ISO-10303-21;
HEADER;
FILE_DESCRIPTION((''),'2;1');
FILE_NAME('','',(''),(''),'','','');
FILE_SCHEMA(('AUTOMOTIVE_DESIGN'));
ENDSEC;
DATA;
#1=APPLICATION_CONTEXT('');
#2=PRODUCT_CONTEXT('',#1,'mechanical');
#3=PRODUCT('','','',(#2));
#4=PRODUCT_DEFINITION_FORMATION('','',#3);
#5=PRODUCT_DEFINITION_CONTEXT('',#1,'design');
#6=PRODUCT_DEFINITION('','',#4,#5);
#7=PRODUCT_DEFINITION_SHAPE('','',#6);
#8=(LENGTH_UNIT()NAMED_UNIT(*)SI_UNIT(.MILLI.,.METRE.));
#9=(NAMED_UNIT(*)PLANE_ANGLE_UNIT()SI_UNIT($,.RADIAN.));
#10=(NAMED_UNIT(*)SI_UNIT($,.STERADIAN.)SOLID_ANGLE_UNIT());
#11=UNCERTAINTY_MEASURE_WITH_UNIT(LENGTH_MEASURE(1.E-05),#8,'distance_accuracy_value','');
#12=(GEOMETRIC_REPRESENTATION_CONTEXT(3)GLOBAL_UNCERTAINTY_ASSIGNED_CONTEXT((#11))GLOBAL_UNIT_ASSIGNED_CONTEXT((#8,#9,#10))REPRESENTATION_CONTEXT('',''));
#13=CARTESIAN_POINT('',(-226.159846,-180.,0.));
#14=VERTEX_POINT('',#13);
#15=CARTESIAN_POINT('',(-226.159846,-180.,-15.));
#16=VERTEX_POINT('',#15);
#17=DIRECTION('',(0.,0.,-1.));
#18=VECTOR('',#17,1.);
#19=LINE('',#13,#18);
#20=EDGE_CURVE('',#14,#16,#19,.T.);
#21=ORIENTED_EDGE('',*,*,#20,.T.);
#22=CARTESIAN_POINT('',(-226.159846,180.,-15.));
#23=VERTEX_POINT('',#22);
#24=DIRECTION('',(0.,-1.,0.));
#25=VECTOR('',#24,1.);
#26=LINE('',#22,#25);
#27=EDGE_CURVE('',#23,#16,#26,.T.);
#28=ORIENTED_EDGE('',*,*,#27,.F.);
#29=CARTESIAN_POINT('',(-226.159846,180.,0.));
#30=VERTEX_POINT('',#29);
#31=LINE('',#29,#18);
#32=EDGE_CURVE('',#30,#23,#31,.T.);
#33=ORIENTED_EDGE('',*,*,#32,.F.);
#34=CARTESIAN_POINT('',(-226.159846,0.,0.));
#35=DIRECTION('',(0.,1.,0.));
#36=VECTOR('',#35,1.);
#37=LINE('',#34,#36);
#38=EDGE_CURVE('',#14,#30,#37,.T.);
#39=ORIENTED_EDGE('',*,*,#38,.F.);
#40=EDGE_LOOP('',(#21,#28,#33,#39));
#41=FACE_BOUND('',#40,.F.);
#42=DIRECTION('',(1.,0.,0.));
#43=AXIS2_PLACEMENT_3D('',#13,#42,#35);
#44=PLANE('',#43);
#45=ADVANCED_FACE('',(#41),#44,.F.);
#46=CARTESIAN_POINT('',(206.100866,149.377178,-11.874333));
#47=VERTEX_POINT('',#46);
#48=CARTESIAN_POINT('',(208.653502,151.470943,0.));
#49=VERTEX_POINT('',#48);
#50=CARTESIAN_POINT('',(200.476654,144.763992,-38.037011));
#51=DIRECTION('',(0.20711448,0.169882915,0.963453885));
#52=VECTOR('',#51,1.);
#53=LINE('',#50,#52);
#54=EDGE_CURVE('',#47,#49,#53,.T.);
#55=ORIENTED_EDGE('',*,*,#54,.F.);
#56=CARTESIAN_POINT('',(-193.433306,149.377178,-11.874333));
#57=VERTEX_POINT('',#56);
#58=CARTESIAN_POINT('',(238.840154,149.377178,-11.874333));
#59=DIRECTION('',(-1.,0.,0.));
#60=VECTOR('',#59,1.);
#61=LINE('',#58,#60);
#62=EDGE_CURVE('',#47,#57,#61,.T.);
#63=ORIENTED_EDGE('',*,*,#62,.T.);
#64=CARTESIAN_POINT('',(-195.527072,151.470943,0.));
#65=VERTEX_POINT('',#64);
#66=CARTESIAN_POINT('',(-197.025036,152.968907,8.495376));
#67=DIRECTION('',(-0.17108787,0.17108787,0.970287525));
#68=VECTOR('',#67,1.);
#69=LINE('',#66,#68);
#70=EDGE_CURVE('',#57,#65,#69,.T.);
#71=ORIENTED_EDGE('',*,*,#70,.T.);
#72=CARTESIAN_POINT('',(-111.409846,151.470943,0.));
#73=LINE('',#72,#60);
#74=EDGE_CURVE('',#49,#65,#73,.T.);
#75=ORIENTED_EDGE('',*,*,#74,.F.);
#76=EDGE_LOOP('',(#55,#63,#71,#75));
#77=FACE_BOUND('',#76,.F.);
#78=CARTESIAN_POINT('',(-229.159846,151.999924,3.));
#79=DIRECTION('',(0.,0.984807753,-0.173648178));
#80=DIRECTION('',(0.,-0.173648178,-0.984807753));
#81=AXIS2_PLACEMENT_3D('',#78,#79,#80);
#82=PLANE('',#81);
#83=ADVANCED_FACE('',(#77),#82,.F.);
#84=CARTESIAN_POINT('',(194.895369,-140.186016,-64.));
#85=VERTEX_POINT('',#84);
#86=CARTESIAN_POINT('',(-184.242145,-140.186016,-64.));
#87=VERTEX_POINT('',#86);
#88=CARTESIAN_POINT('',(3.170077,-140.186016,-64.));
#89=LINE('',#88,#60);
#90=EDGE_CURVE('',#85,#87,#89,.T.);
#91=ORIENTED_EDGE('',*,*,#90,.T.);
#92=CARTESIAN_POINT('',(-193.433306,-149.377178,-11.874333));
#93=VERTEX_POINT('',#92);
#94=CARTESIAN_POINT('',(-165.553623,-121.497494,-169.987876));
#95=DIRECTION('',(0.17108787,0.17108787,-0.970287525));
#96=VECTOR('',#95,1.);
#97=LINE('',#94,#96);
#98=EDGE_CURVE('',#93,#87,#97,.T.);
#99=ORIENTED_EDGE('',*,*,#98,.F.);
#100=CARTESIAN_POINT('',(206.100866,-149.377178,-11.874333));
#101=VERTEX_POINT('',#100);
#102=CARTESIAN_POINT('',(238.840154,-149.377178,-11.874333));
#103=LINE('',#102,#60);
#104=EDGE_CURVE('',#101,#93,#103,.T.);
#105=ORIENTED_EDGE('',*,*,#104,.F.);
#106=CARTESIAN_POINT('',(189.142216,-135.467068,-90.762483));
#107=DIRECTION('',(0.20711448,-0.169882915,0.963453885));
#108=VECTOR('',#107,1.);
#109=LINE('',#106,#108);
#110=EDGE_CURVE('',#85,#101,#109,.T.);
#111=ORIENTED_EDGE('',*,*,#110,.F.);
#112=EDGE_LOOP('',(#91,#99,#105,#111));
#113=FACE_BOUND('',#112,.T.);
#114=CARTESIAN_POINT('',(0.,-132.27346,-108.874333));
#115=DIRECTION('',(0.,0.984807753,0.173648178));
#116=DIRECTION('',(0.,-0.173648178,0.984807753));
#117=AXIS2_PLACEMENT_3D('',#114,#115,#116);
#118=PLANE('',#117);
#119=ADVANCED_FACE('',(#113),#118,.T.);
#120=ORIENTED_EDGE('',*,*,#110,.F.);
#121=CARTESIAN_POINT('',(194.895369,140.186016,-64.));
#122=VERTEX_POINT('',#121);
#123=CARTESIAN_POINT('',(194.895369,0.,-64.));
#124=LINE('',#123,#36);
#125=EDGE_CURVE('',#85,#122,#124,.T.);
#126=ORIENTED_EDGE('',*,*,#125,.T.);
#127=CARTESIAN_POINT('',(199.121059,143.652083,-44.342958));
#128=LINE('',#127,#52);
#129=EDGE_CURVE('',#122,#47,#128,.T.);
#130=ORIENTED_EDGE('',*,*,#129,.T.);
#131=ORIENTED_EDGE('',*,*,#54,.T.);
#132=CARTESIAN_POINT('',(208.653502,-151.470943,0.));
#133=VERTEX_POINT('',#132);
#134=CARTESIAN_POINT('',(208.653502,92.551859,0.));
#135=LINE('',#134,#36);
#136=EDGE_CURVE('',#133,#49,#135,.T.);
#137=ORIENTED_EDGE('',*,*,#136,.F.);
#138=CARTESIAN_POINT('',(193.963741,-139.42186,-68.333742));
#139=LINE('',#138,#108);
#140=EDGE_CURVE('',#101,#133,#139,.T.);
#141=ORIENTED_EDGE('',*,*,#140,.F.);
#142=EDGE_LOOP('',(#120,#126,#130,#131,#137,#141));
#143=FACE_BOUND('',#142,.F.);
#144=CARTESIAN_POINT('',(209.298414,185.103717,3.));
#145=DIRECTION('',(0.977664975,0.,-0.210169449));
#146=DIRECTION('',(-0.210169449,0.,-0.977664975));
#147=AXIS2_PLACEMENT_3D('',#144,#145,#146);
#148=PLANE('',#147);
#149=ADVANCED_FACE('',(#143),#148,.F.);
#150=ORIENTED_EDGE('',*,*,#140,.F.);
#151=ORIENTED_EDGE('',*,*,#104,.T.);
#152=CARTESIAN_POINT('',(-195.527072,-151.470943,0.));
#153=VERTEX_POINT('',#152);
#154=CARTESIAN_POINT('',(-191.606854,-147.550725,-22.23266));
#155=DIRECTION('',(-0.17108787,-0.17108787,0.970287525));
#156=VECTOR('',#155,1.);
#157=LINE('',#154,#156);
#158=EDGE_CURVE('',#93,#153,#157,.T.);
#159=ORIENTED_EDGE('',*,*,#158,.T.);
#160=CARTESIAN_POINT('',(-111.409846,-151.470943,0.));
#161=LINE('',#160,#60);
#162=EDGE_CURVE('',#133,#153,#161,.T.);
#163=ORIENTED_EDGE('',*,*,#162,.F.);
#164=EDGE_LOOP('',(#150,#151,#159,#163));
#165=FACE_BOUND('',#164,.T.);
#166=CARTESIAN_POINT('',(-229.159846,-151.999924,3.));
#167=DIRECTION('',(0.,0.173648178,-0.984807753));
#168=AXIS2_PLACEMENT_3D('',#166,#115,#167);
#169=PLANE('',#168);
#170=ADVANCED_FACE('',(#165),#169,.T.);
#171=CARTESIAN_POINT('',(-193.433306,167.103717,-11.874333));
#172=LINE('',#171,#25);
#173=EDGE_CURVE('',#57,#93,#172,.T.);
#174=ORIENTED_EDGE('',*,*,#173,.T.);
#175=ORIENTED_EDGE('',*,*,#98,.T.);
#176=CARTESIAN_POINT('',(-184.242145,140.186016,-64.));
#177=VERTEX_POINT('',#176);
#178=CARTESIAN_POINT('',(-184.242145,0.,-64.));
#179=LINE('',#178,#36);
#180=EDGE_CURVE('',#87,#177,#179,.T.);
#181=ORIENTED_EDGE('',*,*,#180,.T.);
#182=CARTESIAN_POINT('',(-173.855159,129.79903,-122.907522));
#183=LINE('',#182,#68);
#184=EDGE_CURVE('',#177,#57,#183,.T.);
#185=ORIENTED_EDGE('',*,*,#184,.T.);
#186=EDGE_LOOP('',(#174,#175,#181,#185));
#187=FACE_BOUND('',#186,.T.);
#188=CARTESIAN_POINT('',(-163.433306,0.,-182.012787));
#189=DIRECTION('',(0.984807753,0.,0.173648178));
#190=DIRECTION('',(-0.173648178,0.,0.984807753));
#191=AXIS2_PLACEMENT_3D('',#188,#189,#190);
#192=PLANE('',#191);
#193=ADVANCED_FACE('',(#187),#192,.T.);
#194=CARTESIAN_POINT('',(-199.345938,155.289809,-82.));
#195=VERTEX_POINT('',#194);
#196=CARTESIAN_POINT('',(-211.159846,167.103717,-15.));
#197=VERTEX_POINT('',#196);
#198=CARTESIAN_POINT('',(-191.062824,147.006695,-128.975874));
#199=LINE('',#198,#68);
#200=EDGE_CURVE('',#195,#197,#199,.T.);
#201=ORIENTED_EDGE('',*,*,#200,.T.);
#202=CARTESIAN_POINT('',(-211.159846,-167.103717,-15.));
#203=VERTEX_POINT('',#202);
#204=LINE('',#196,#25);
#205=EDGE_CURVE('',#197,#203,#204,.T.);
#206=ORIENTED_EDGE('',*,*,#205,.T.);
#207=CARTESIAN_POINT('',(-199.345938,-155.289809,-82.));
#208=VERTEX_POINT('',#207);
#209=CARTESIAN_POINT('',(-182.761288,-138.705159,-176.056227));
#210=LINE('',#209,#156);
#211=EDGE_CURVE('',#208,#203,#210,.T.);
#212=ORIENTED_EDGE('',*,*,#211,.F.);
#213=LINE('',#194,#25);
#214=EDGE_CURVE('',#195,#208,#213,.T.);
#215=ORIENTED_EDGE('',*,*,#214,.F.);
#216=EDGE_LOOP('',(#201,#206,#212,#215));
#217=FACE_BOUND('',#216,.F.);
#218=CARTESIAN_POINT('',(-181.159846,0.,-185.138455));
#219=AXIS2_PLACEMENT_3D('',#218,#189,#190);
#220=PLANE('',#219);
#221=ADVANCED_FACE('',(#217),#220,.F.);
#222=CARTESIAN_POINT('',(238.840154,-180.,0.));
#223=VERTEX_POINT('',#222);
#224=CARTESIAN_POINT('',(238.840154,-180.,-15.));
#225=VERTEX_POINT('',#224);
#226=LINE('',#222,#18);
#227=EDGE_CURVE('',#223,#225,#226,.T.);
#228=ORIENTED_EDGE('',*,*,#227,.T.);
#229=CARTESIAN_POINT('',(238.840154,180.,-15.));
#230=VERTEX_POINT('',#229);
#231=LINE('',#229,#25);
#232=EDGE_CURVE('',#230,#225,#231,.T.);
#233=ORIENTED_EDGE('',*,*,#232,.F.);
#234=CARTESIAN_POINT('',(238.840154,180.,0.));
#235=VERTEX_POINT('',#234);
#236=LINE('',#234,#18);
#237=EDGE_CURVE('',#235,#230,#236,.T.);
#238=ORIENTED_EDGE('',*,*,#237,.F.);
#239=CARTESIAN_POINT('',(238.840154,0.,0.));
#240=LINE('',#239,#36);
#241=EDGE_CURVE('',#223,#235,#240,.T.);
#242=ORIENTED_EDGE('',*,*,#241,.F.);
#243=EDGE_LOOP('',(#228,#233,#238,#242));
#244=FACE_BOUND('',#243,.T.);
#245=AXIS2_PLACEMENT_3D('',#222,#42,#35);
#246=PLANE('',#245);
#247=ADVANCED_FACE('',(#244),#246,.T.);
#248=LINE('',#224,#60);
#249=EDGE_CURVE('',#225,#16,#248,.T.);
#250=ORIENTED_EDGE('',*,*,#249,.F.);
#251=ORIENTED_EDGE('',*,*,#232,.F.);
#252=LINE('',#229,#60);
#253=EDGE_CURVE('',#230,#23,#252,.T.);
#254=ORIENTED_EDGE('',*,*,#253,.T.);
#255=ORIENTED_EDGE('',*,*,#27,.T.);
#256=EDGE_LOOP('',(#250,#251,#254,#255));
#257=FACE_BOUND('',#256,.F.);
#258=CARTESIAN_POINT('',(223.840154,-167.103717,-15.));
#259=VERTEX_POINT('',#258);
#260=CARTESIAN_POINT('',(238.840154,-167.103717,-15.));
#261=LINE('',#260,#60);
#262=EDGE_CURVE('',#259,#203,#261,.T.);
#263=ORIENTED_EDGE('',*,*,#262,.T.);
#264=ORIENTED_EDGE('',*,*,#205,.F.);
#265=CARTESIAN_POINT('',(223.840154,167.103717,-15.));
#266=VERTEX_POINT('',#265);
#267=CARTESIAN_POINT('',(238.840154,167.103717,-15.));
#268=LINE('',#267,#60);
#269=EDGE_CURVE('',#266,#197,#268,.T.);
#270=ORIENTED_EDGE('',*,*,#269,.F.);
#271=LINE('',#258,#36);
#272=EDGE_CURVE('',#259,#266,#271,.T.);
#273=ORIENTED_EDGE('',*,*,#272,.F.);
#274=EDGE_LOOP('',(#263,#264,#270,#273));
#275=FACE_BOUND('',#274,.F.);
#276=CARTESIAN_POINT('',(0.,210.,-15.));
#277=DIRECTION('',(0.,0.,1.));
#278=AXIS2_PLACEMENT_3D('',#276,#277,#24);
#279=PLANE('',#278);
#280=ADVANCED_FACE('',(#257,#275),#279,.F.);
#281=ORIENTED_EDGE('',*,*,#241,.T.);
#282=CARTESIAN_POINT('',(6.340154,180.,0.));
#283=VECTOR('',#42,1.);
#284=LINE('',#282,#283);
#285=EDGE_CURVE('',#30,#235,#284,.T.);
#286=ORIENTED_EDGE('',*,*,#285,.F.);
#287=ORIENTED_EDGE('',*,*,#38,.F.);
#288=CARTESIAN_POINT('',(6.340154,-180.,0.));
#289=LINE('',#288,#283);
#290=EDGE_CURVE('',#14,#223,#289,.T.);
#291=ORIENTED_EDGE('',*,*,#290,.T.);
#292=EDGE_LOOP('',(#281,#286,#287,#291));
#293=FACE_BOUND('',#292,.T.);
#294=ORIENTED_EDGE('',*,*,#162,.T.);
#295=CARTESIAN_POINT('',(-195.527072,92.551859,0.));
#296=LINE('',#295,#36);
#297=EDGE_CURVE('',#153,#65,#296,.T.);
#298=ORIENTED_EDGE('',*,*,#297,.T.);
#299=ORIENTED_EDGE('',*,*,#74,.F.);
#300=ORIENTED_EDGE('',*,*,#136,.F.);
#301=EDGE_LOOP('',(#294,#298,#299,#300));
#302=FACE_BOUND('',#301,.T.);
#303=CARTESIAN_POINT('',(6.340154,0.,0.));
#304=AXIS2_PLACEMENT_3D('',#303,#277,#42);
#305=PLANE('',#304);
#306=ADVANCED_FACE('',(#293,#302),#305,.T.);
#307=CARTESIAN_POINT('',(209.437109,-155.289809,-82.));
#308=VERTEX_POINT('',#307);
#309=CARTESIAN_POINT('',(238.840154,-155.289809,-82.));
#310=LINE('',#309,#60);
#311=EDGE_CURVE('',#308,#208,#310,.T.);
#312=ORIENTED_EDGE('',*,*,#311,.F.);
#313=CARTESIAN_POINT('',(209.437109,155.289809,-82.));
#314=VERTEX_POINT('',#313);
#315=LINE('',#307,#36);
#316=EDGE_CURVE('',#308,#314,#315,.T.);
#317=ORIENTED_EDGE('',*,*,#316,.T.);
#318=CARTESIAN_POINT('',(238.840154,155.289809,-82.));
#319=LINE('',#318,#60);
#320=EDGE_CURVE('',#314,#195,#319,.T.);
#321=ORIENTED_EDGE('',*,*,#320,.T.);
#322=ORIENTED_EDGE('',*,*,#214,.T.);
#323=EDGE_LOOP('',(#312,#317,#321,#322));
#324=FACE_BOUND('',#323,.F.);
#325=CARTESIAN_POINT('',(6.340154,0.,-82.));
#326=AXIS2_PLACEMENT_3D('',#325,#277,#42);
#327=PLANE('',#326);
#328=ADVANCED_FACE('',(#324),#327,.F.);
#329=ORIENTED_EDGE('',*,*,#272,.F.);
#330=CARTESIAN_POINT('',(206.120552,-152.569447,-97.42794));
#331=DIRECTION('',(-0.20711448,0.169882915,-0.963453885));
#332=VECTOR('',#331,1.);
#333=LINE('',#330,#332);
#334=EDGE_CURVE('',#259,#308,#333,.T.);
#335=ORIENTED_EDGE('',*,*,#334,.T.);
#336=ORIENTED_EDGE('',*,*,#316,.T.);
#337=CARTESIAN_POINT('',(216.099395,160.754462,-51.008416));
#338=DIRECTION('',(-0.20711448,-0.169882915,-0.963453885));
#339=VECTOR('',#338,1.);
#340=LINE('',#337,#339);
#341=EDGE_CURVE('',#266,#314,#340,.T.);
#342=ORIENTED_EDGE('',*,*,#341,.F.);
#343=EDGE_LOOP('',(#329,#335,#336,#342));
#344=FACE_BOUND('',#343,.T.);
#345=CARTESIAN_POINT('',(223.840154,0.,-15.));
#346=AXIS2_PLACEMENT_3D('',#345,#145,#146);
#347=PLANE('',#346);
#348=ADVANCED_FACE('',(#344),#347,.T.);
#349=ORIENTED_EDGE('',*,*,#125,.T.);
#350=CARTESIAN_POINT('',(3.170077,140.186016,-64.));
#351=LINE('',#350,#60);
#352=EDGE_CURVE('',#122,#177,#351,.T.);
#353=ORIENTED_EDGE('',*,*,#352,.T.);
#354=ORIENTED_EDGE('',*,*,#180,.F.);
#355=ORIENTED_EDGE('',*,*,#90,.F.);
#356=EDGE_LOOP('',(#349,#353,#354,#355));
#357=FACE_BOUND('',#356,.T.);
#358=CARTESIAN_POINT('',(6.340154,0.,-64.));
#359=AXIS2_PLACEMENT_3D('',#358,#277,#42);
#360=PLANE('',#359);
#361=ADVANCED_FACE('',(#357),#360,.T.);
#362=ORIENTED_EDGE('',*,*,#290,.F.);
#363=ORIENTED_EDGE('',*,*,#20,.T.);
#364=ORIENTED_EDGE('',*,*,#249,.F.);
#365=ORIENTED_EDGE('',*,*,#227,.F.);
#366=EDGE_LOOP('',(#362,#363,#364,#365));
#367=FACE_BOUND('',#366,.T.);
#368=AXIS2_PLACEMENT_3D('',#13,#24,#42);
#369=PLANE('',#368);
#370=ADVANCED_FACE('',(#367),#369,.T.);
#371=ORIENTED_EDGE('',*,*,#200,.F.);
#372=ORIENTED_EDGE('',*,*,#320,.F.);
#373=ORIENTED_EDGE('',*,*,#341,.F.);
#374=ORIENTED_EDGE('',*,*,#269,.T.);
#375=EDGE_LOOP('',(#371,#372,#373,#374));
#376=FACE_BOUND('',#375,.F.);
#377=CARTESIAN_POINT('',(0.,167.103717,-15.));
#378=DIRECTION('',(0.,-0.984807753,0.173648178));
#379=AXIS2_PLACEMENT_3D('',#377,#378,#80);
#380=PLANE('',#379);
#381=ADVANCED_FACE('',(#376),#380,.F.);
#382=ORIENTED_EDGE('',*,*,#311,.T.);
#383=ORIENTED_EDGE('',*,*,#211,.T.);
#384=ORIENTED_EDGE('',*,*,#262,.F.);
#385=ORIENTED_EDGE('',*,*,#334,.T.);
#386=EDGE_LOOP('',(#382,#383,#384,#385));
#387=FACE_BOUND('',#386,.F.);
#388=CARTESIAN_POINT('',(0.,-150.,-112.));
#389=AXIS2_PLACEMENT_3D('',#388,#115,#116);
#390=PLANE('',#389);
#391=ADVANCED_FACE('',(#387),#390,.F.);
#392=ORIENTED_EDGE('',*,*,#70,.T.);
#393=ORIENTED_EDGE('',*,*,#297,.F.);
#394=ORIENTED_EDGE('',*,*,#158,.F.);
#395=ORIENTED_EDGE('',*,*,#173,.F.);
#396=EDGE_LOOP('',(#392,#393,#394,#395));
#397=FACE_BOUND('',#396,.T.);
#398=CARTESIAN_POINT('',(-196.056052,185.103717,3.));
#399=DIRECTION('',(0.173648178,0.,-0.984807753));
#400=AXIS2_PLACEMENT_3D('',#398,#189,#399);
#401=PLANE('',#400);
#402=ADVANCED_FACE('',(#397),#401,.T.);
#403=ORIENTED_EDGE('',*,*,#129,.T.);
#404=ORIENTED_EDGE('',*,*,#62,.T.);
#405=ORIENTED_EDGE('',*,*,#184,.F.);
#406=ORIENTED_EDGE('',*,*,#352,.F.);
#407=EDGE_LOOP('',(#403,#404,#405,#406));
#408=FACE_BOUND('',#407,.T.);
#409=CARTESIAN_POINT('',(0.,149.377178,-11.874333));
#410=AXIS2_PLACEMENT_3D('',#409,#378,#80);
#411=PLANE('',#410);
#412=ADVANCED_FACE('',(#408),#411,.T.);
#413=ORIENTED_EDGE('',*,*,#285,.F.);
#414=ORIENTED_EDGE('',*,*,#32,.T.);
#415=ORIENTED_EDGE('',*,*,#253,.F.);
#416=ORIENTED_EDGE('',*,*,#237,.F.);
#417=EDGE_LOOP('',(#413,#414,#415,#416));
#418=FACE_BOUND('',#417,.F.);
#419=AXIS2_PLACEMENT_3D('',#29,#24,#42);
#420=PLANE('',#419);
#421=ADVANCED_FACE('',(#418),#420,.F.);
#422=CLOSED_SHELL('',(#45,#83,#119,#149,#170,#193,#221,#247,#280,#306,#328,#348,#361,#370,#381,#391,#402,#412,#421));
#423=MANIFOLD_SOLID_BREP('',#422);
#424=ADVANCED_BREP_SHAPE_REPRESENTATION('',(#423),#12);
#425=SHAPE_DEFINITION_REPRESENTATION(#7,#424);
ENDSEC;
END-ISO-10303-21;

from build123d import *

# Parameters (mm, degrees)
F0_W          = 465
F0_H          = 360
F1_DEPTH      = 82
F3_DEPTH      = 238.8411541644
F3_DEPTH_BACK = 251
F5_DEPTH      = 190
F5_DEPTH_BACK = 341
F6_T          = 18
F6_T3_DEPTH   = 370.2074342574
F6_T5_DEPTH   = 471


# Not quite as in the source:
# - a shell that OpenCascade refuses in one call is made with other operations: the cavity is built on its own and cut out


with BuildPart() as f1:
    # F0 (on Top) → F1 (new body)
    with BuildSketch(Plane.XY):
        with Locations((6.3401541644, 0)):
            Rectangle(F0_W, F0_H)
    extrude(amount=-F1_DEPTH)

    # F2 (on Right) → F3 (cut, two sides)
    with BuildSketch(Plane.YZ) as f3_sk:
        Polygon((-210, -15), (-210, -112), (-150, -112), (-167.1037171287, -15), align=None)
        Polygon((210, -15), (167.1037171287, -15), (150, -112), (210, -112), align=None)
    extrude(amount=F3_DEPTH, mode=Mode.SUBTRACT)
    extrude(f3_sk.sketch, amount=-F3_DEPTH_BACK, mode=Mode.SUBTRACT)

    # F4 (on Front) → F5 (cut, two sides)
    with BuildSketch(Plane.XZ) as f5_sk:
        Polygon((-241.1598458356, -15), (-241.1598458356, -185.1384545885), (-181.1598458356, -185.1384545885), (-211.1598458356, -15), align=None)
        Polygon((253.8401541644, -15), (223.8401541644, -15), (193.8816988413, -154.3605614963), (253.8401541644, -156.5929672103), align=None)
    extrude(amount=F5_DEPTH, mode=Mode.SUBTRACT)
    extrude(f5_sk.sketch, amount=-F5_DEPTH_BACK, mode=Mode.SUBTRACT)

    # F6: shell of thickness 18, made by hand


with BuildPart() as f6_core1:
    # F6_t2: copy of F1
    add(f1.part)

    # the walls: a layer under each face that stays
    f6_faces = [f6_core1.faces().sort_by_distance(p)[0] for p in [
        (-226.1598458356, 0, -7.5),
        (6.3401541644, -180, -7.5),
        (238.8401541644, 0, -7.5),
        (223.3401541644, 168, -15),
        (6.3401541644, 161.196763275, -48.5),
        (5.0455852734, 0, -82),
        (216.6386314197, 0, -48.5),
        (6.3401541644, -161.196763275, -48.5),
        (-205.2528919819, 0, -48.5),
        (6.3401541644, 180, -7.5),
    ]]
    thicken(f6_faces, amount=-F6_T, mode=Mode.SUBTRACT)

    # F6_s4 → F6_t3 (cut)
    with BuildSketch(Plane.XZ.offset(-185.1037171287)):
        Polygon((-211.3371112312, -15.211256672), (-211.1598458356, 3), (-196.0560524744, 3), (-193.4333062814, -11.874332802), align=None)
        Polygon((224.0161338598, -15.2178305009), (223.8401541644, 3), (209.2984141185, 3), (206.2421846213, -11.2169499127), align=None)
    extrude(amount=F6_T3_DEPTH, mode=Mode.SUBTRACT)

    # F6_s6 → F6_t5 (cut)
    with BuildSketch(Plane.YZ.offset(-229.1598458356)):
        Polygon((-167.2809825243, -15.211256672), (-167.1037171287, 3), (-151.9999237675, 3), (-149.3771775745, -11.874332802), align=None)
        Polygon((167.2809825243, -15.211256672), (167.1037171287, 3), (151.9999237675, 3), (149.3771775745, -11.874332802), align=None)
    extrude(amount=F6_T5_DEPTH, mode=Mode.SUBTRACT)


with BuildPart() as f1_1:
    add(f1.part)

    # what is left inside the walls is the cavity
    f6_cavity = [f6_core1.part.solids().sort_by_distance(p)[0] for p in [
        (6.563215, -50.490314, -0.18),
    ]]
    add(f6_cavity, mode=Mode.SUBTRACT)


solid = f1_1.part
